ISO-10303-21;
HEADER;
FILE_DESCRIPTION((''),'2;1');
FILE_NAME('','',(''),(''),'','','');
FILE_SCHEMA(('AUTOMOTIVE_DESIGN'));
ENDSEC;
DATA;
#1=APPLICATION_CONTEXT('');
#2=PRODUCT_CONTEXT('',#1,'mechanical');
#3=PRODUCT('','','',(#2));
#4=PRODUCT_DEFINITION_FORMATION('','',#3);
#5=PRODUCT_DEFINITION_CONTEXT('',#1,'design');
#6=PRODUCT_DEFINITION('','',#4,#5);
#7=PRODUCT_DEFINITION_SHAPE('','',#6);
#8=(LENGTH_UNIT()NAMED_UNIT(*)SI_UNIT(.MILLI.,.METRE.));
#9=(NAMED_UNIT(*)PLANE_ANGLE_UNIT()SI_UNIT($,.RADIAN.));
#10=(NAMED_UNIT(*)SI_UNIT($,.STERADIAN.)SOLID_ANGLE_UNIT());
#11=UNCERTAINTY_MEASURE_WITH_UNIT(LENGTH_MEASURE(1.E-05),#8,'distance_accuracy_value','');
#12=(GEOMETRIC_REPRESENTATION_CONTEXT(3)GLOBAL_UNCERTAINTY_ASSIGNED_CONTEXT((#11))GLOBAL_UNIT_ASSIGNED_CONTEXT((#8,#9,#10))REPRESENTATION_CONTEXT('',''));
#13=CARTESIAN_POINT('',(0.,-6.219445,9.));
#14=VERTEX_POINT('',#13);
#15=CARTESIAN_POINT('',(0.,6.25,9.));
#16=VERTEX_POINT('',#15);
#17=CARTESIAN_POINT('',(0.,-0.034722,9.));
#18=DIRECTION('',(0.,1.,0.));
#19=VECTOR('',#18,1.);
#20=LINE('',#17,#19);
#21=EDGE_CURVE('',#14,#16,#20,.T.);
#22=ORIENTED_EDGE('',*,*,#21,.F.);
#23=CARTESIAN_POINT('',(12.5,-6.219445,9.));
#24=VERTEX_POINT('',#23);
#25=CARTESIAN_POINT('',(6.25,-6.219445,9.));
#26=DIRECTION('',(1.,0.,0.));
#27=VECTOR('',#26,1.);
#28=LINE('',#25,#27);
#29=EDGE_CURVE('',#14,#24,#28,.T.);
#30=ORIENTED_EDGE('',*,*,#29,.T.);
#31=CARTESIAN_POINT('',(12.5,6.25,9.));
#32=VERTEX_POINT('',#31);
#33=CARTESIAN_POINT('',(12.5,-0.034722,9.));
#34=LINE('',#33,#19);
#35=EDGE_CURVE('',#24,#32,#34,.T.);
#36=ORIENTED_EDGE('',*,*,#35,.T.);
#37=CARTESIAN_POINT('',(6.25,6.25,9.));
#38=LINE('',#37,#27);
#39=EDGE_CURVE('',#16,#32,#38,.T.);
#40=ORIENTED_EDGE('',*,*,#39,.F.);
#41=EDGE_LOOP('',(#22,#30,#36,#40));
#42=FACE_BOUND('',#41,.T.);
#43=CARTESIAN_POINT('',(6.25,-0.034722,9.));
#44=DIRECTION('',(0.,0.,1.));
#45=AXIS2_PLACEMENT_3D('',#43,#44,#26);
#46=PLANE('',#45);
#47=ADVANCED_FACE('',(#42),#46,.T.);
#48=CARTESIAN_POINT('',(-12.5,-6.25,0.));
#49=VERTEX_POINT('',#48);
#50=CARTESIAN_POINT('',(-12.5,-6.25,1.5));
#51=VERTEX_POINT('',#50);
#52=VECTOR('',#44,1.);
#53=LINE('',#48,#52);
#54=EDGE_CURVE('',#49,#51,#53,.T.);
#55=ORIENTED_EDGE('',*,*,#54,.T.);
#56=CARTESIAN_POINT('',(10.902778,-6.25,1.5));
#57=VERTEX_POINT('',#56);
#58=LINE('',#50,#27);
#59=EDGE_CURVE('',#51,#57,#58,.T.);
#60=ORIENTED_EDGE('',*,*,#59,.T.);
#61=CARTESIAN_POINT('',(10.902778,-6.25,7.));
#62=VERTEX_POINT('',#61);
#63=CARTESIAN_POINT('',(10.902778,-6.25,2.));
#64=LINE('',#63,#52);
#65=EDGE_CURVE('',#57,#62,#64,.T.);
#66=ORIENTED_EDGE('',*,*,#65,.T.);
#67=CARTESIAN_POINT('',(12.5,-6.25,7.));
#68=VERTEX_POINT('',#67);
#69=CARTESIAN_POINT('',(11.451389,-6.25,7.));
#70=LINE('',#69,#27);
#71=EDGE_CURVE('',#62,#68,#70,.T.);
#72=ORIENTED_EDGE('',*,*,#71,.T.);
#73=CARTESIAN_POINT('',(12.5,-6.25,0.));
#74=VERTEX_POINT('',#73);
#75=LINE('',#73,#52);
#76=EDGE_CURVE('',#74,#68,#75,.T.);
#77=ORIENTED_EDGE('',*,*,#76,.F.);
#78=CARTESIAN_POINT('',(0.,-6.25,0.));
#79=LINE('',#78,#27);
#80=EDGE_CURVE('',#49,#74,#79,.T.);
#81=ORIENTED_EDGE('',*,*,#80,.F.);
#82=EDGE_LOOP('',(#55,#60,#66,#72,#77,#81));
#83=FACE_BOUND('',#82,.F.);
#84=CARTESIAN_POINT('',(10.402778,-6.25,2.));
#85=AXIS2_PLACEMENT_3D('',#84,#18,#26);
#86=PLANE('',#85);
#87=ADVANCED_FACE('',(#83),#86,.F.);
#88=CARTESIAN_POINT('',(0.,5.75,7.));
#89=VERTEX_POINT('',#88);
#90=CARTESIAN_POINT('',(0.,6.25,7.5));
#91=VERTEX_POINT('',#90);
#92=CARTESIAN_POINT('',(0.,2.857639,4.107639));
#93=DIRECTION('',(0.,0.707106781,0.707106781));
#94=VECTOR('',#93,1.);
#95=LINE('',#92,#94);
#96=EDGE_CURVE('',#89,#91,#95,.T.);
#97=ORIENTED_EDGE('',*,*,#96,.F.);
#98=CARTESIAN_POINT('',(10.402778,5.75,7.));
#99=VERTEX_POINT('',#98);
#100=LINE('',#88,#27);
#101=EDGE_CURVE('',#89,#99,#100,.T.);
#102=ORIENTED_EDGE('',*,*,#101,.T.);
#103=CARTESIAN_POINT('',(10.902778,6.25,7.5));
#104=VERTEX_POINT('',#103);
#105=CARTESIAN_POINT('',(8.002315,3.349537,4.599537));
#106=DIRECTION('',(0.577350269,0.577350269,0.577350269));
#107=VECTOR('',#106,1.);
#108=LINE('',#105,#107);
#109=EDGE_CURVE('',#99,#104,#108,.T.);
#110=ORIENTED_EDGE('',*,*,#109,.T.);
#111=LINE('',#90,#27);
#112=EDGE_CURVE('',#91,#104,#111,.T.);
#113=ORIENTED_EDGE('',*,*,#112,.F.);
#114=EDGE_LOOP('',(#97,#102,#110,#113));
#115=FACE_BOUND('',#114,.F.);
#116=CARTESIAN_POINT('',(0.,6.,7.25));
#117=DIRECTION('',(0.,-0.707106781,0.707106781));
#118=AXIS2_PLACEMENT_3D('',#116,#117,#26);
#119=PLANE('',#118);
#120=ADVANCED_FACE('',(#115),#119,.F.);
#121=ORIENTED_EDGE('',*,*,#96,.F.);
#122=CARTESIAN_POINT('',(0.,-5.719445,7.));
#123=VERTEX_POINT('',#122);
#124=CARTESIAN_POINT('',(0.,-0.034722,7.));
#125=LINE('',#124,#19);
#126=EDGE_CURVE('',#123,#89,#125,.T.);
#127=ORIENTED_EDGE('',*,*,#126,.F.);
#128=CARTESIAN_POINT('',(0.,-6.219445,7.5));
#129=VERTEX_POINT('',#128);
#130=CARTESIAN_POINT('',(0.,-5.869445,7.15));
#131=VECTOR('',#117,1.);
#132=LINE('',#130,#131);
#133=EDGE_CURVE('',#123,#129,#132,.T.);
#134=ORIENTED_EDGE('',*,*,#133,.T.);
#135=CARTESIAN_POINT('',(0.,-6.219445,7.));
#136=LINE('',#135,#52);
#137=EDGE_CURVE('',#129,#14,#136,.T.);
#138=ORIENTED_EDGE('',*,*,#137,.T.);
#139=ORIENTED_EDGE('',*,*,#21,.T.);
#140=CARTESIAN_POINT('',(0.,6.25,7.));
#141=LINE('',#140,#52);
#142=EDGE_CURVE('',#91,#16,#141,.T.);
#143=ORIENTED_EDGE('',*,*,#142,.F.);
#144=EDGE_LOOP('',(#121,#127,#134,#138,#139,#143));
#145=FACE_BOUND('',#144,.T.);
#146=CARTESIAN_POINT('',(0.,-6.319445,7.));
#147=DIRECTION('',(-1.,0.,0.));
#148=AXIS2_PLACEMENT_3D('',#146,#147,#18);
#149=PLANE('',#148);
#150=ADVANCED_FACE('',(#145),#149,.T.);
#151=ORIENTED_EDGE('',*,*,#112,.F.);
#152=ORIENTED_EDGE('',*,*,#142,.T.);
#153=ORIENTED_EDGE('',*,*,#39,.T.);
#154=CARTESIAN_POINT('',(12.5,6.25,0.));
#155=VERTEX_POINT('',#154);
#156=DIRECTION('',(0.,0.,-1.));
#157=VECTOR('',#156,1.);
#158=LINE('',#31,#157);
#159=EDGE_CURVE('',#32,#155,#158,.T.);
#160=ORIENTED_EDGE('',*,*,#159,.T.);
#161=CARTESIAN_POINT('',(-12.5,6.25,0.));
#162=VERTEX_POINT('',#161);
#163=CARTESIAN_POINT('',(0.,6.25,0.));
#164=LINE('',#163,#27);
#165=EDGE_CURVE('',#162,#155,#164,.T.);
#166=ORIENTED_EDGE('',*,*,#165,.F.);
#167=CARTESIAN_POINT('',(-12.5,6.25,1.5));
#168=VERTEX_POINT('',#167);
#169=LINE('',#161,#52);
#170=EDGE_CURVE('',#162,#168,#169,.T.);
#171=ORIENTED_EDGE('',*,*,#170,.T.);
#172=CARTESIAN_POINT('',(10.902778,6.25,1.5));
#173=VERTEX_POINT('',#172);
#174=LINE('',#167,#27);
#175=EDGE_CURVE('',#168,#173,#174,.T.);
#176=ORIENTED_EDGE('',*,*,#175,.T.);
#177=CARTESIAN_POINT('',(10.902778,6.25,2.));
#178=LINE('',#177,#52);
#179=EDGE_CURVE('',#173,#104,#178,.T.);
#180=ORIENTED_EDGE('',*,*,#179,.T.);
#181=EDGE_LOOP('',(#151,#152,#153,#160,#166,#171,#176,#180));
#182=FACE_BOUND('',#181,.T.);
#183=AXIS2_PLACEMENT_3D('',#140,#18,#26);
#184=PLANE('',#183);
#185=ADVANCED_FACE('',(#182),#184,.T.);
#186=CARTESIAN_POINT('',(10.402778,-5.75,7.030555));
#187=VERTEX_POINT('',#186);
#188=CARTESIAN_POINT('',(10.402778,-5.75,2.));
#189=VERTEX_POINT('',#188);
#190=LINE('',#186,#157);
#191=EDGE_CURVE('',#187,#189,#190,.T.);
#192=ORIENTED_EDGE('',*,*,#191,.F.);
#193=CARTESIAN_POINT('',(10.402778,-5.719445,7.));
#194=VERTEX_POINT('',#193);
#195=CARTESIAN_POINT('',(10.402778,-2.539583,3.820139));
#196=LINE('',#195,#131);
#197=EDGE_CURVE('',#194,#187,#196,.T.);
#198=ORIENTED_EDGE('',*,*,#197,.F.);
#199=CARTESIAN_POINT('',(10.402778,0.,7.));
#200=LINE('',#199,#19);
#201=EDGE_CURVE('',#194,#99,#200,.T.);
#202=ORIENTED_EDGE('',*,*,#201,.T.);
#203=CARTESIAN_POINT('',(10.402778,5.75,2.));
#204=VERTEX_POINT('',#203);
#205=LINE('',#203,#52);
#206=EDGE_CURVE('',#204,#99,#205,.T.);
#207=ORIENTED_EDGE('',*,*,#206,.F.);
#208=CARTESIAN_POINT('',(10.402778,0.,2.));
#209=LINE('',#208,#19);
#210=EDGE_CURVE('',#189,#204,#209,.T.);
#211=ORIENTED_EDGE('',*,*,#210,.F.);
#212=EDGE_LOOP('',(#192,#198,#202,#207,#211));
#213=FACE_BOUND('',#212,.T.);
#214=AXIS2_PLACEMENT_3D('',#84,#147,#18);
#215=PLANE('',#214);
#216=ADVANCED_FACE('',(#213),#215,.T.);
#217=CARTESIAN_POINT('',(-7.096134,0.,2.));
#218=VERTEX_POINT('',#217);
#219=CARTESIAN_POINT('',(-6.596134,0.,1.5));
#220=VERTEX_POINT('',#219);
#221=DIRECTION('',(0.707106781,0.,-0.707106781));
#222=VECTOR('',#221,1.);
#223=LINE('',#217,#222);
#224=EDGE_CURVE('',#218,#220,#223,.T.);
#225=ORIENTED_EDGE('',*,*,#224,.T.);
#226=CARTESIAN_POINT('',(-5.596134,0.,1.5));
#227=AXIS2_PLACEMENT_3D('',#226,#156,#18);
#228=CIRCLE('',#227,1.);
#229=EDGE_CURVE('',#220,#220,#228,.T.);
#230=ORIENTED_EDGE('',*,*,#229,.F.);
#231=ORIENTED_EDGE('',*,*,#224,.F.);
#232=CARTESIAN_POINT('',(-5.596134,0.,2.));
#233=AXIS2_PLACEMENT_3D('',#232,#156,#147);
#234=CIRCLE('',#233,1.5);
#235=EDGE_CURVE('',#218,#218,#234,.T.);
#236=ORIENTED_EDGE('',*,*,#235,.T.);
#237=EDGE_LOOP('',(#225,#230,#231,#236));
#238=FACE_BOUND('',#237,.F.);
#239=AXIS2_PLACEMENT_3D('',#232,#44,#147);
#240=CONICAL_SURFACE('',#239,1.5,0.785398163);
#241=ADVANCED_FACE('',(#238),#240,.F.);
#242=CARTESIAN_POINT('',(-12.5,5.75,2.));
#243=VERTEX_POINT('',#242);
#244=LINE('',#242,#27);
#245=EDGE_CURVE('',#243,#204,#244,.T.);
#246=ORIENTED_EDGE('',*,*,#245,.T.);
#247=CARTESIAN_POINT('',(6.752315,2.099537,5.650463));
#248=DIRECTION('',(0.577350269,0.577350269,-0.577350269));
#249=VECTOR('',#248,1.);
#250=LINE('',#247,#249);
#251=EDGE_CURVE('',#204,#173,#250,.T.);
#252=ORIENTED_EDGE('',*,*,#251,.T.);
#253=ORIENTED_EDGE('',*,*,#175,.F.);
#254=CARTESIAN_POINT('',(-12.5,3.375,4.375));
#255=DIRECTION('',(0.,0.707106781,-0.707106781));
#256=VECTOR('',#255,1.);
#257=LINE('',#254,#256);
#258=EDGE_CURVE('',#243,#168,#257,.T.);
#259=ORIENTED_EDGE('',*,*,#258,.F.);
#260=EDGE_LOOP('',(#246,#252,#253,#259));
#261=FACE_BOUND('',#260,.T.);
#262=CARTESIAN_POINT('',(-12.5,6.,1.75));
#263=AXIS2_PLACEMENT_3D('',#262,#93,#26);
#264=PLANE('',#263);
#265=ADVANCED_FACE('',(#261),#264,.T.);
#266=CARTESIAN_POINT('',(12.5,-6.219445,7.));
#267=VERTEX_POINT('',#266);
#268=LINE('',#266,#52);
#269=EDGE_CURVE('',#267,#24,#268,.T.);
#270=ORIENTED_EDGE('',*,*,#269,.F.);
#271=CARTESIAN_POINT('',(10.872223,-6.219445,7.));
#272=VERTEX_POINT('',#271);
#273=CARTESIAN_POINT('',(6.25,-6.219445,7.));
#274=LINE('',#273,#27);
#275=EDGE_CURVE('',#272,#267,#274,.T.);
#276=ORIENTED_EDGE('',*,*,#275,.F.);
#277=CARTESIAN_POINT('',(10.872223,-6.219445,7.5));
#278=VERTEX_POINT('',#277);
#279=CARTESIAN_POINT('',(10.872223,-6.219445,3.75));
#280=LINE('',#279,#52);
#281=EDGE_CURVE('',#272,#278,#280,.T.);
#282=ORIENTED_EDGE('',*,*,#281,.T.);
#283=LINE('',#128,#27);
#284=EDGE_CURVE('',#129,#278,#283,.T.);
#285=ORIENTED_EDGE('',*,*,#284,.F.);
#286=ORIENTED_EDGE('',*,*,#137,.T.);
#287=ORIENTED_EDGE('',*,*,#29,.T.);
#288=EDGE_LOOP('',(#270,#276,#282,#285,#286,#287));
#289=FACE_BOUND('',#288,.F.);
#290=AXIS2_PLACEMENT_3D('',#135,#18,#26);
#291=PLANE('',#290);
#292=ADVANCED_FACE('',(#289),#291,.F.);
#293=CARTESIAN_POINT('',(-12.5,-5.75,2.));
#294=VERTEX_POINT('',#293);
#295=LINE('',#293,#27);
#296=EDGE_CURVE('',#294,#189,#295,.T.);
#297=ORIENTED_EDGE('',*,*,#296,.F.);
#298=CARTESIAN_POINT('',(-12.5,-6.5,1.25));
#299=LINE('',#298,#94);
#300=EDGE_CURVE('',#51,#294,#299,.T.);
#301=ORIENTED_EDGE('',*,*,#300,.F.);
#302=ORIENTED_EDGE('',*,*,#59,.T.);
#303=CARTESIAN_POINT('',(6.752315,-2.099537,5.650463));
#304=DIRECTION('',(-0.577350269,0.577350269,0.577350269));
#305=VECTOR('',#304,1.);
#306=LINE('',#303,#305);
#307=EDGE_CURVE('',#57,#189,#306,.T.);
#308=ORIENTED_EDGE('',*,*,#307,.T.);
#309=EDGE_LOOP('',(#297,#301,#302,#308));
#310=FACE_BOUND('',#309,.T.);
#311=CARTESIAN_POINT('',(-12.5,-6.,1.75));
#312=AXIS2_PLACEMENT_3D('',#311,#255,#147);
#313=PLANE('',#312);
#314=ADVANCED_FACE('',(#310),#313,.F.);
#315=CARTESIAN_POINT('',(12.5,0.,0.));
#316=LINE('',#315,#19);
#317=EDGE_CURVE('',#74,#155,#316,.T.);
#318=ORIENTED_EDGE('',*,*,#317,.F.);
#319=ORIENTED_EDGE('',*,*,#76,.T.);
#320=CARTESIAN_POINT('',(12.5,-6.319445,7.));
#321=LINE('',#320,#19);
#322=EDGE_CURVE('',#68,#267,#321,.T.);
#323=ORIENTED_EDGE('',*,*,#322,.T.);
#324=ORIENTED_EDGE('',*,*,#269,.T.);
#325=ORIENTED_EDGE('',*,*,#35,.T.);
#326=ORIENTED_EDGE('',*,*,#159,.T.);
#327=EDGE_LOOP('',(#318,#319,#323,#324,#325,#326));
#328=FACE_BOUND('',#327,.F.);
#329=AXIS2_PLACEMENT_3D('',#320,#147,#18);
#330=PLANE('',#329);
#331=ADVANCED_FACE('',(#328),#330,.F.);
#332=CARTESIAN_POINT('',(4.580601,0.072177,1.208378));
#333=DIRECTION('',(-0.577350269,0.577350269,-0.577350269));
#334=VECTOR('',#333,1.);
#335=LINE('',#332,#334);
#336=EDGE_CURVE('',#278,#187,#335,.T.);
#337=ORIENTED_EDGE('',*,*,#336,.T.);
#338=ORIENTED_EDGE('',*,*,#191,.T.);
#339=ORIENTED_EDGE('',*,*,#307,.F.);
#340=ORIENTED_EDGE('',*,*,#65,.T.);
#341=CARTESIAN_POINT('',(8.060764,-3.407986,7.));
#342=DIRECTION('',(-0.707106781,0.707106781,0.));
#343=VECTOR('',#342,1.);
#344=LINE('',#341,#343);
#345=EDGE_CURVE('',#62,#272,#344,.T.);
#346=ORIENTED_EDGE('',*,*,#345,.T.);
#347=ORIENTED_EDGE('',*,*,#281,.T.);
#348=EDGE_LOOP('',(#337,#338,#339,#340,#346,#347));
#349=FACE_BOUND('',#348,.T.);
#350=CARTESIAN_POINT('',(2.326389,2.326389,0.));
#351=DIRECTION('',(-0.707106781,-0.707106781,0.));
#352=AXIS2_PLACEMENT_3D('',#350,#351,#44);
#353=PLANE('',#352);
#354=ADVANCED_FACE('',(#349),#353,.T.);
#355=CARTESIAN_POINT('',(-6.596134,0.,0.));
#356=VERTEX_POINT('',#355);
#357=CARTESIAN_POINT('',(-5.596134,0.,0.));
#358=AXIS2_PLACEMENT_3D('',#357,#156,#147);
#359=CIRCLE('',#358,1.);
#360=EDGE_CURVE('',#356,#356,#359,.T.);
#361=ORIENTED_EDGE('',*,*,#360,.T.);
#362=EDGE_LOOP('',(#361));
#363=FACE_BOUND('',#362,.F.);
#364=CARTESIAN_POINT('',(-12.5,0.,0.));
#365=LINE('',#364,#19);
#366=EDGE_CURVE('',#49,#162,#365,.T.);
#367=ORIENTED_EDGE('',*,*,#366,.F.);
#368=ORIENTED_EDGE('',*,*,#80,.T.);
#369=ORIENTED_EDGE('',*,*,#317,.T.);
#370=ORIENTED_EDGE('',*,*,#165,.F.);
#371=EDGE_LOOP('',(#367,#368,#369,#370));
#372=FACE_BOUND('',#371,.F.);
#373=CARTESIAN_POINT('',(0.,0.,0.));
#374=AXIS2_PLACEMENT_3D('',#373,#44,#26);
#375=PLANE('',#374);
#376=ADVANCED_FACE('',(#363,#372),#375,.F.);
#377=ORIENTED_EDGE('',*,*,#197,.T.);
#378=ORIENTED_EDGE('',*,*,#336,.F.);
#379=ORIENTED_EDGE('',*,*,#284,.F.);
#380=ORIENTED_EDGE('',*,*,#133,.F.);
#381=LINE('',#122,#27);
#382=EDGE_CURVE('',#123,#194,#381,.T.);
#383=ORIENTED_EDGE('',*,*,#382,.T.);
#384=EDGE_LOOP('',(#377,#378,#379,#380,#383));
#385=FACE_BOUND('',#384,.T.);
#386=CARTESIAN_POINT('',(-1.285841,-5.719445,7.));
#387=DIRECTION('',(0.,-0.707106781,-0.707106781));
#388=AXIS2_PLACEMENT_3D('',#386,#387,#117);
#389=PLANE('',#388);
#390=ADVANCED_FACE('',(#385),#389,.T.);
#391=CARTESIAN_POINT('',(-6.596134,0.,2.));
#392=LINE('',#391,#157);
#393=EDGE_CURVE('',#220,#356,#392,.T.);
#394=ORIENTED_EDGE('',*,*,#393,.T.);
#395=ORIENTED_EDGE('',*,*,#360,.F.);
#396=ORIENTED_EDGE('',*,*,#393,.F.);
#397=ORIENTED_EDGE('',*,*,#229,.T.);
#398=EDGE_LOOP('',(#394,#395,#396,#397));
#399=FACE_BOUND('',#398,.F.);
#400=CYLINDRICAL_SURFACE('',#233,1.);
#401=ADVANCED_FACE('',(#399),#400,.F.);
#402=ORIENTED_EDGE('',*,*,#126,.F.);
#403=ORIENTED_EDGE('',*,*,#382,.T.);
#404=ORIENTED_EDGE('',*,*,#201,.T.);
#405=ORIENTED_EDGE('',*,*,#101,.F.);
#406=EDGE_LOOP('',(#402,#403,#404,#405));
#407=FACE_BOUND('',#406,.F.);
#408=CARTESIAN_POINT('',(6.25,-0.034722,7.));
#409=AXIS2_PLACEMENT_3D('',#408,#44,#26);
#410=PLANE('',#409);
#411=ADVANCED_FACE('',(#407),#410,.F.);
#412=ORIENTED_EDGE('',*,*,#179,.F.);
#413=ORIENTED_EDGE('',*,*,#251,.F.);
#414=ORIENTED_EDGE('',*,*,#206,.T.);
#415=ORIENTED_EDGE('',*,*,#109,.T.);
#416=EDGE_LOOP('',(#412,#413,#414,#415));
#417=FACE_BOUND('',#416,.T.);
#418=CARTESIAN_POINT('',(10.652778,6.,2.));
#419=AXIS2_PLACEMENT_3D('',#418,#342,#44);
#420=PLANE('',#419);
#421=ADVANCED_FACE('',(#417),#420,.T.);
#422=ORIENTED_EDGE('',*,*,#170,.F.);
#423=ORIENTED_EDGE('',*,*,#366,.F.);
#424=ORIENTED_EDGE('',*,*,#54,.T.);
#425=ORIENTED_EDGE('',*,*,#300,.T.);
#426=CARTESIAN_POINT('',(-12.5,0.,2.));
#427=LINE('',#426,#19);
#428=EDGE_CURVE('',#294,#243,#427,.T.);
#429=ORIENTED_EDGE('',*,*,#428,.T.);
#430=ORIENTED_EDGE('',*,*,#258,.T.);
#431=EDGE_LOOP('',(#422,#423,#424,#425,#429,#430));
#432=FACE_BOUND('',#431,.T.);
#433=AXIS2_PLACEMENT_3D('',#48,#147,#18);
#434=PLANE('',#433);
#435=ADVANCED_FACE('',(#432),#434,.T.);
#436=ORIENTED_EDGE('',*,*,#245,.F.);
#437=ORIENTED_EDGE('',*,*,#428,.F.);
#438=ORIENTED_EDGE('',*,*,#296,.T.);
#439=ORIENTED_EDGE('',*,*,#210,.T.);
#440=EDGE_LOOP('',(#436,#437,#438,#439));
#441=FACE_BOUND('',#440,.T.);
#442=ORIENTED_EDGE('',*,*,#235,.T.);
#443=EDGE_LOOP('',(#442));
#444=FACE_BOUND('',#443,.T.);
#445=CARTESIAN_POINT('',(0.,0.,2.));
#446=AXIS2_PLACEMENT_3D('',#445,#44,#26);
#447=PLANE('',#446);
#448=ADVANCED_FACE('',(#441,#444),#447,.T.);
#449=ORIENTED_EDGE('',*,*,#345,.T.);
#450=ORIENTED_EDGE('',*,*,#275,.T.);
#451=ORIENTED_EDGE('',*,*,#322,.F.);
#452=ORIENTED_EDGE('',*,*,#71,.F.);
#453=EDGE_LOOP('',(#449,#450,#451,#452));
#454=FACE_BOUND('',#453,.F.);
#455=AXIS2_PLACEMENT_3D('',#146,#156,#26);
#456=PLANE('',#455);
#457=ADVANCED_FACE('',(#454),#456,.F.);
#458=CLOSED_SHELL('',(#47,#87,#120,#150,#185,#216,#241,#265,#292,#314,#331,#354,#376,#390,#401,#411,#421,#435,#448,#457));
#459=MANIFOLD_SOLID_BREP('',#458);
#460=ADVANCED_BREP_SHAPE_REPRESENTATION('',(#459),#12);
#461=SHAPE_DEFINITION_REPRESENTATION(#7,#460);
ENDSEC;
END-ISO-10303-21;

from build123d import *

# Parameters (mm, degrees)
F0_W           = 25
F0_H           = 12.5
F1_DEPTH       = 2
F2_W           = 2.0972218364
F2_H           = 12.5
F3_DEPTH       = 5
F4_W           = 12.5
F4_H           = 12.5694446266
F5_DEPTH       = 2
F6_SIZE        = 0.5
F8_D           = 2
F8_CSINK_D     = 3
F8_CSINK_ANGLE = 90
F9_DEPTH       = 0.1
F10_T4_DEPTH   = 13.4439057781
F10_T9_DEPTH   = 13.4439057781


# Not quite as in the source:
# - a fillet or chamfer that OpenCascade refuses, or shapes differently, is made with other operations: its cross-section is extruded or revolved along the edge and cut away or added


with BuildPart() as f1:
    # F0 (on Top) → F1 (new body)
    with BuildSketch(Plane.XY):
        Rectangle(F0_W, F0_H)
    extrude(amount=F1_DEPTH)

    # F2 (on face) → F3 (join)
    with BuildSketch(Plane.XY.offset(2)):
        with Locations((11.4513890818, 0)):
            Rectangle(F2_W, F2_H)
    extrude(amount=F3_DEPTH)

    # F4 (on face) → F5 (join)
    with BuildSketch(Plane.XY.offset(7)):
        with Locations((6.25, -0.0347223133)):
            Rectangle(F4_W, F4_H)
    extrude(amount=F5_DEPTH)

    # F6
    f6_edges = [f1.edges().sort_by_distance(p)[0] for p in [
        (10.402778, 6.25, 4.5),
        (-1.048611, 6.25, 2),
        (10.402778, -6.25, 4.5),
        (-1.048611, -6.25, 2),
        (5.201389, 6.25, 7),
    ]]
    chamfer(f6_edges, length=F6_SIZE)

    # F8 (through all)
    with Locations(Plane.XY.offset(2)):
        with Locations((-5.596134346, 0)):
            CounterSinkHole(F8_D / 2, F8_CSINK_D / 2, counter_sink_angle=F8_CSINK_ANGLE)

    # F9 (cut): a face of the model
    f9_faces = [f1.faces().sort_by_distance(p)[0] for p in [
        (6.25, -6.3194446266, 8),
    ]]
    extrude(f9_faces, amount=-F9_DEPTH, mode=Mode.SUBTRACT)

    # F10: chamfer of 0.5 on 1 edges, made by hand


with BuildPart() as f10_tool2:
    # F10_s3 → F10_t4 (new body)
    with BuildSketch(Plane.YZ.offset(-1.285841494)):
        Polygon((-5.7194446266, 7), (-6.2194446266, 7.5), (-6.2194446266, 7), align=None)
    extrude(amount=F10_T4_DEPTH)

    split(bisect_by=Plane(origin=(2.3263890818, 2.3263890818, 0), x_dir=(0, 0, 1), z_dir=(-0.7071067812, -0.7071067812, 0)), keep=Keep.TOP)


with BuildPart() as f1_1:
    add(f1.part)

    # F10_t1: cut F10_tool2
    add(f10_tool2.part, mode=Mode.SUBTRACT)


with BuildPart() as f10_tool7:
    # F10_s8 → F10_t9 (new body)
    with BuildSketch(Plane.YZ.offset(-1.285841494)):
        Polygon((-5.7194446266, 7), (-6.2194446266, 7.5), (-6.2194446266, 7), align=None)
    extrude(amount=F10_T9_DEPTH)

    split(bisect_by=Plane.YZ.offset(10.4027781636), keep=Keep.BOTTOM)


with BuildPart() as f1_2:
    add(f1_1.part)

    # F10_t6: cut F10_tool7
    add(f10_tool7.part, mode=Mode.SUBTRACT)


solid = f1_2.part
